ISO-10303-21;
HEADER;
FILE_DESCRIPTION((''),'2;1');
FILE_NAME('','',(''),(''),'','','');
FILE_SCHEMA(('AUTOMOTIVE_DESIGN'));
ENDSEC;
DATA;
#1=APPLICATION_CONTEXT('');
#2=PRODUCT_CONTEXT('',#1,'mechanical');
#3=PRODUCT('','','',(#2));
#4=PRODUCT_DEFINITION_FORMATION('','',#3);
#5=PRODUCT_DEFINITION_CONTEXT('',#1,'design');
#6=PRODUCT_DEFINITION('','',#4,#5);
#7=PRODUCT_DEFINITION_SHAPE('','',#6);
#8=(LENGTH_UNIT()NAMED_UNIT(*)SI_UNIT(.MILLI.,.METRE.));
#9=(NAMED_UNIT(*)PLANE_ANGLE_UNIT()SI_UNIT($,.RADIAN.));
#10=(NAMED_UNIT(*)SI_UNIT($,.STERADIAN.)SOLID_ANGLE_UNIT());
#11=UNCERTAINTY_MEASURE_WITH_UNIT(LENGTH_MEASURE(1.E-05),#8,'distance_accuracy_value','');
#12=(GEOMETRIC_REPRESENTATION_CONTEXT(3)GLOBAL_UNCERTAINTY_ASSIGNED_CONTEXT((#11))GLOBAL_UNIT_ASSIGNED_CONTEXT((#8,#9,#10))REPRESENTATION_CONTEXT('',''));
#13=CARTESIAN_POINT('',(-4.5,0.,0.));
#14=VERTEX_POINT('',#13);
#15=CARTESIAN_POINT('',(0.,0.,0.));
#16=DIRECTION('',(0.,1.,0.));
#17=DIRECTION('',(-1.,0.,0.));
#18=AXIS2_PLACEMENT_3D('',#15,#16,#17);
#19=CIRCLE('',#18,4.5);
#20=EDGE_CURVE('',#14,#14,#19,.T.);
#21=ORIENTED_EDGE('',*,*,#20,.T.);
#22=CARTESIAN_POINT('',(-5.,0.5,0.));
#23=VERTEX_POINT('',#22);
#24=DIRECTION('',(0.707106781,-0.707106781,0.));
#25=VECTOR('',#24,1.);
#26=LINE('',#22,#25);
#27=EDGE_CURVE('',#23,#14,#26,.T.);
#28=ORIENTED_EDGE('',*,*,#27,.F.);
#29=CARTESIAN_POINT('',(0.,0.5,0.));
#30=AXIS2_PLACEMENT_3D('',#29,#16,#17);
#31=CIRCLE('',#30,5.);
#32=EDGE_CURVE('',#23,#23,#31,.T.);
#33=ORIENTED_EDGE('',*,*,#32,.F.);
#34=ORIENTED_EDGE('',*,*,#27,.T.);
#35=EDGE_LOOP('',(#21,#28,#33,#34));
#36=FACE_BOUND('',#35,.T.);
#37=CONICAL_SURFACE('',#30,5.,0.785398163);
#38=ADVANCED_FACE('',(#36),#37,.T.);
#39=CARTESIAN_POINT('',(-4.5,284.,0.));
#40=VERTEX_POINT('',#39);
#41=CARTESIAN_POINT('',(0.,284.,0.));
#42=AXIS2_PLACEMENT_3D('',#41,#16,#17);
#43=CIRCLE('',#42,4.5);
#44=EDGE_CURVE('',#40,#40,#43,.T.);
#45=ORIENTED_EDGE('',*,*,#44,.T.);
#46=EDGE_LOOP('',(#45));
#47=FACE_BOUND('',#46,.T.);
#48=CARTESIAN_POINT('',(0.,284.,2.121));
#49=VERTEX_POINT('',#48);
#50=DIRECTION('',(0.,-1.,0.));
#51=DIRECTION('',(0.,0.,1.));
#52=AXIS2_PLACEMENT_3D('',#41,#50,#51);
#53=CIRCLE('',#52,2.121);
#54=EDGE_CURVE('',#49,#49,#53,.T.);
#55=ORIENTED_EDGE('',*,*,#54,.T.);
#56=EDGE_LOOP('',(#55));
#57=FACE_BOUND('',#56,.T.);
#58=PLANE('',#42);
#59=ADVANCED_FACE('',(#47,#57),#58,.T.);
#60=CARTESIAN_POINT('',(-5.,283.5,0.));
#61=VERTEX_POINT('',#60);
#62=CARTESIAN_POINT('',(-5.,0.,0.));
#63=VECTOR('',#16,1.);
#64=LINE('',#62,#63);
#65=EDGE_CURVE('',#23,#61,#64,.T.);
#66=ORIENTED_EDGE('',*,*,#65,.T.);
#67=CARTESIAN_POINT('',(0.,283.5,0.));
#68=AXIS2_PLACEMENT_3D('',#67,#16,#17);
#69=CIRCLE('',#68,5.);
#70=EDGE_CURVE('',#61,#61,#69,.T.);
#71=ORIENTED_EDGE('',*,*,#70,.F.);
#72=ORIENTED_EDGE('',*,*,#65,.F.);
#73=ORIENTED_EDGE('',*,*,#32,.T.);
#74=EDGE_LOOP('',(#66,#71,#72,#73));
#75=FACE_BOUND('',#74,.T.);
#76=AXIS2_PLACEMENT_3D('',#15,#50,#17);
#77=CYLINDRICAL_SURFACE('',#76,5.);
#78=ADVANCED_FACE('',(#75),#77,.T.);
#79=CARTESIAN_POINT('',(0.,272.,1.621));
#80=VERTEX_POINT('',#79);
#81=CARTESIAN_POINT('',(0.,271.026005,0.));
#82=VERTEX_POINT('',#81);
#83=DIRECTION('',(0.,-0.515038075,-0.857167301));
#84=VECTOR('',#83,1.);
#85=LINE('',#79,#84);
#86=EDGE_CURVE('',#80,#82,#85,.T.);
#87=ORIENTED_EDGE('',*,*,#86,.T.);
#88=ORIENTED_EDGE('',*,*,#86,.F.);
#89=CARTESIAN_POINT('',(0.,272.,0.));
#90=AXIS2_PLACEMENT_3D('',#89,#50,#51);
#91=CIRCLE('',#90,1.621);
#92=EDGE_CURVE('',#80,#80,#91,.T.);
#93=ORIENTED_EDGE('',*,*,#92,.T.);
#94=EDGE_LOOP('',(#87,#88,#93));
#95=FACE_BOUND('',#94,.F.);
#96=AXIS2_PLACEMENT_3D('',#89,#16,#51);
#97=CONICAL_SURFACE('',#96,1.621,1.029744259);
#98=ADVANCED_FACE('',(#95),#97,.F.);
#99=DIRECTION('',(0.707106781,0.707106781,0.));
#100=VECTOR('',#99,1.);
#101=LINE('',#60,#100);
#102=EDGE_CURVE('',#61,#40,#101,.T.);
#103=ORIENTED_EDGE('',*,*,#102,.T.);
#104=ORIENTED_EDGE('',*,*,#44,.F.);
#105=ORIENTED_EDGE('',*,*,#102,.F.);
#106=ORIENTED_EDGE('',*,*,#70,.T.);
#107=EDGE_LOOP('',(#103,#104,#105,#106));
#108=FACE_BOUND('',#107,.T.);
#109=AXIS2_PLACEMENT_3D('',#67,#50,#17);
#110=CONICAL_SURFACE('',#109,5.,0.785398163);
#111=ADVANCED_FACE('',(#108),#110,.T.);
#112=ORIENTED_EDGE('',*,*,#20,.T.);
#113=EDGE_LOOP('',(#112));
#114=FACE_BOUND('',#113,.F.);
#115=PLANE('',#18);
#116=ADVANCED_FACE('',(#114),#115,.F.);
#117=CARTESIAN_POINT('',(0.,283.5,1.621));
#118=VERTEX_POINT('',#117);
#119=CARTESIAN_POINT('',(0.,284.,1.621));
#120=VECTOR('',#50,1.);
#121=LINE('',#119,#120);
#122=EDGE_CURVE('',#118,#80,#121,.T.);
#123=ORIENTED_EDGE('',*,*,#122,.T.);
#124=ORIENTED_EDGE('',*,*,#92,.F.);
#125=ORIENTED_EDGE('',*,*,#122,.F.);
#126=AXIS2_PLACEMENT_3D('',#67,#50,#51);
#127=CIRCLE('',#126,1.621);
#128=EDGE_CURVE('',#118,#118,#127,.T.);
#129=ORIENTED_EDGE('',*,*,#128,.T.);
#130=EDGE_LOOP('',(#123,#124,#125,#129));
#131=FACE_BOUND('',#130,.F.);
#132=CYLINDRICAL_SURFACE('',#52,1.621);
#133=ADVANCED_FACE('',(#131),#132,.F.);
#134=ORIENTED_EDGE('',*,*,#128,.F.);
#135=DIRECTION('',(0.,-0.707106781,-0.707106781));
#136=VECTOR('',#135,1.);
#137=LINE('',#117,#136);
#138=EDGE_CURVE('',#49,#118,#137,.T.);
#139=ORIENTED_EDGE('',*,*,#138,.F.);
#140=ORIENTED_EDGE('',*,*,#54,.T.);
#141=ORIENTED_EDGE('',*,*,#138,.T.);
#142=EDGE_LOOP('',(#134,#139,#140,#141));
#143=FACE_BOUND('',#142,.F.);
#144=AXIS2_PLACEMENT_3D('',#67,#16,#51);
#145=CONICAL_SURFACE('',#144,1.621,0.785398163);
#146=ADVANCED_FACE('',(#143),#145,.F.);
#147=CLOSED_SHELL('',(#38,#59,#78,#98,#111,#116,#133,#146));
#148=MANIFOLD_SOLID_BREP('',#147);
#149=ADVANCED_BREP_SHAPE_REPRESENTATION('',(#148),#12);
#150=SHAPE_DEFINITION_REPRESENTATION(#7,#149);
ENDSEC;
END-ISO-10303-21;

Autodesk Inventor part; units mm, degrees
ref_plane "YZ Plane" through (0, 0, 0) normal (1, 0, 0) x (0, 1, 0)
ref_plane "XZ Plane" through (0, 0, 0) normal (0, 1, 0) x (-1, 0, 0)
ref_plane "XY Plane" through (0, 0, 0) normal (0, 0, 1) x (1, 0, 0)
sketch "Sketch1" plane through (0, 0, 0) normal (0, 1, 0) x (-1, 0, 0)
  circle A0 centre (0, 0) radius 5
  dimension "d0" = 10
extrude "Extrusion1" add sketch "Sketch1" along normal blind 284
sketch "Sketch2" plane through (0, 284, 0) normal (0, 1, 0) x (1, 0, 0)
  point P0 (0, 0)
  point P1 (0, 0)
hole "Hole1" at (0, 284, 0) direction (0, -1, 0) diameter 3.242 depth 12 tip angle 118 thread size "M4x0.7" class "6H" standard "ISO Metric profile"
chamfer "Chamfer1" distance 0.5 angle 45 3 edges at (0, 284, -1.621) (5, 284, 0) (5, 0, 0)
properties part number "CUT_ALU_10x284mm_Rod"
